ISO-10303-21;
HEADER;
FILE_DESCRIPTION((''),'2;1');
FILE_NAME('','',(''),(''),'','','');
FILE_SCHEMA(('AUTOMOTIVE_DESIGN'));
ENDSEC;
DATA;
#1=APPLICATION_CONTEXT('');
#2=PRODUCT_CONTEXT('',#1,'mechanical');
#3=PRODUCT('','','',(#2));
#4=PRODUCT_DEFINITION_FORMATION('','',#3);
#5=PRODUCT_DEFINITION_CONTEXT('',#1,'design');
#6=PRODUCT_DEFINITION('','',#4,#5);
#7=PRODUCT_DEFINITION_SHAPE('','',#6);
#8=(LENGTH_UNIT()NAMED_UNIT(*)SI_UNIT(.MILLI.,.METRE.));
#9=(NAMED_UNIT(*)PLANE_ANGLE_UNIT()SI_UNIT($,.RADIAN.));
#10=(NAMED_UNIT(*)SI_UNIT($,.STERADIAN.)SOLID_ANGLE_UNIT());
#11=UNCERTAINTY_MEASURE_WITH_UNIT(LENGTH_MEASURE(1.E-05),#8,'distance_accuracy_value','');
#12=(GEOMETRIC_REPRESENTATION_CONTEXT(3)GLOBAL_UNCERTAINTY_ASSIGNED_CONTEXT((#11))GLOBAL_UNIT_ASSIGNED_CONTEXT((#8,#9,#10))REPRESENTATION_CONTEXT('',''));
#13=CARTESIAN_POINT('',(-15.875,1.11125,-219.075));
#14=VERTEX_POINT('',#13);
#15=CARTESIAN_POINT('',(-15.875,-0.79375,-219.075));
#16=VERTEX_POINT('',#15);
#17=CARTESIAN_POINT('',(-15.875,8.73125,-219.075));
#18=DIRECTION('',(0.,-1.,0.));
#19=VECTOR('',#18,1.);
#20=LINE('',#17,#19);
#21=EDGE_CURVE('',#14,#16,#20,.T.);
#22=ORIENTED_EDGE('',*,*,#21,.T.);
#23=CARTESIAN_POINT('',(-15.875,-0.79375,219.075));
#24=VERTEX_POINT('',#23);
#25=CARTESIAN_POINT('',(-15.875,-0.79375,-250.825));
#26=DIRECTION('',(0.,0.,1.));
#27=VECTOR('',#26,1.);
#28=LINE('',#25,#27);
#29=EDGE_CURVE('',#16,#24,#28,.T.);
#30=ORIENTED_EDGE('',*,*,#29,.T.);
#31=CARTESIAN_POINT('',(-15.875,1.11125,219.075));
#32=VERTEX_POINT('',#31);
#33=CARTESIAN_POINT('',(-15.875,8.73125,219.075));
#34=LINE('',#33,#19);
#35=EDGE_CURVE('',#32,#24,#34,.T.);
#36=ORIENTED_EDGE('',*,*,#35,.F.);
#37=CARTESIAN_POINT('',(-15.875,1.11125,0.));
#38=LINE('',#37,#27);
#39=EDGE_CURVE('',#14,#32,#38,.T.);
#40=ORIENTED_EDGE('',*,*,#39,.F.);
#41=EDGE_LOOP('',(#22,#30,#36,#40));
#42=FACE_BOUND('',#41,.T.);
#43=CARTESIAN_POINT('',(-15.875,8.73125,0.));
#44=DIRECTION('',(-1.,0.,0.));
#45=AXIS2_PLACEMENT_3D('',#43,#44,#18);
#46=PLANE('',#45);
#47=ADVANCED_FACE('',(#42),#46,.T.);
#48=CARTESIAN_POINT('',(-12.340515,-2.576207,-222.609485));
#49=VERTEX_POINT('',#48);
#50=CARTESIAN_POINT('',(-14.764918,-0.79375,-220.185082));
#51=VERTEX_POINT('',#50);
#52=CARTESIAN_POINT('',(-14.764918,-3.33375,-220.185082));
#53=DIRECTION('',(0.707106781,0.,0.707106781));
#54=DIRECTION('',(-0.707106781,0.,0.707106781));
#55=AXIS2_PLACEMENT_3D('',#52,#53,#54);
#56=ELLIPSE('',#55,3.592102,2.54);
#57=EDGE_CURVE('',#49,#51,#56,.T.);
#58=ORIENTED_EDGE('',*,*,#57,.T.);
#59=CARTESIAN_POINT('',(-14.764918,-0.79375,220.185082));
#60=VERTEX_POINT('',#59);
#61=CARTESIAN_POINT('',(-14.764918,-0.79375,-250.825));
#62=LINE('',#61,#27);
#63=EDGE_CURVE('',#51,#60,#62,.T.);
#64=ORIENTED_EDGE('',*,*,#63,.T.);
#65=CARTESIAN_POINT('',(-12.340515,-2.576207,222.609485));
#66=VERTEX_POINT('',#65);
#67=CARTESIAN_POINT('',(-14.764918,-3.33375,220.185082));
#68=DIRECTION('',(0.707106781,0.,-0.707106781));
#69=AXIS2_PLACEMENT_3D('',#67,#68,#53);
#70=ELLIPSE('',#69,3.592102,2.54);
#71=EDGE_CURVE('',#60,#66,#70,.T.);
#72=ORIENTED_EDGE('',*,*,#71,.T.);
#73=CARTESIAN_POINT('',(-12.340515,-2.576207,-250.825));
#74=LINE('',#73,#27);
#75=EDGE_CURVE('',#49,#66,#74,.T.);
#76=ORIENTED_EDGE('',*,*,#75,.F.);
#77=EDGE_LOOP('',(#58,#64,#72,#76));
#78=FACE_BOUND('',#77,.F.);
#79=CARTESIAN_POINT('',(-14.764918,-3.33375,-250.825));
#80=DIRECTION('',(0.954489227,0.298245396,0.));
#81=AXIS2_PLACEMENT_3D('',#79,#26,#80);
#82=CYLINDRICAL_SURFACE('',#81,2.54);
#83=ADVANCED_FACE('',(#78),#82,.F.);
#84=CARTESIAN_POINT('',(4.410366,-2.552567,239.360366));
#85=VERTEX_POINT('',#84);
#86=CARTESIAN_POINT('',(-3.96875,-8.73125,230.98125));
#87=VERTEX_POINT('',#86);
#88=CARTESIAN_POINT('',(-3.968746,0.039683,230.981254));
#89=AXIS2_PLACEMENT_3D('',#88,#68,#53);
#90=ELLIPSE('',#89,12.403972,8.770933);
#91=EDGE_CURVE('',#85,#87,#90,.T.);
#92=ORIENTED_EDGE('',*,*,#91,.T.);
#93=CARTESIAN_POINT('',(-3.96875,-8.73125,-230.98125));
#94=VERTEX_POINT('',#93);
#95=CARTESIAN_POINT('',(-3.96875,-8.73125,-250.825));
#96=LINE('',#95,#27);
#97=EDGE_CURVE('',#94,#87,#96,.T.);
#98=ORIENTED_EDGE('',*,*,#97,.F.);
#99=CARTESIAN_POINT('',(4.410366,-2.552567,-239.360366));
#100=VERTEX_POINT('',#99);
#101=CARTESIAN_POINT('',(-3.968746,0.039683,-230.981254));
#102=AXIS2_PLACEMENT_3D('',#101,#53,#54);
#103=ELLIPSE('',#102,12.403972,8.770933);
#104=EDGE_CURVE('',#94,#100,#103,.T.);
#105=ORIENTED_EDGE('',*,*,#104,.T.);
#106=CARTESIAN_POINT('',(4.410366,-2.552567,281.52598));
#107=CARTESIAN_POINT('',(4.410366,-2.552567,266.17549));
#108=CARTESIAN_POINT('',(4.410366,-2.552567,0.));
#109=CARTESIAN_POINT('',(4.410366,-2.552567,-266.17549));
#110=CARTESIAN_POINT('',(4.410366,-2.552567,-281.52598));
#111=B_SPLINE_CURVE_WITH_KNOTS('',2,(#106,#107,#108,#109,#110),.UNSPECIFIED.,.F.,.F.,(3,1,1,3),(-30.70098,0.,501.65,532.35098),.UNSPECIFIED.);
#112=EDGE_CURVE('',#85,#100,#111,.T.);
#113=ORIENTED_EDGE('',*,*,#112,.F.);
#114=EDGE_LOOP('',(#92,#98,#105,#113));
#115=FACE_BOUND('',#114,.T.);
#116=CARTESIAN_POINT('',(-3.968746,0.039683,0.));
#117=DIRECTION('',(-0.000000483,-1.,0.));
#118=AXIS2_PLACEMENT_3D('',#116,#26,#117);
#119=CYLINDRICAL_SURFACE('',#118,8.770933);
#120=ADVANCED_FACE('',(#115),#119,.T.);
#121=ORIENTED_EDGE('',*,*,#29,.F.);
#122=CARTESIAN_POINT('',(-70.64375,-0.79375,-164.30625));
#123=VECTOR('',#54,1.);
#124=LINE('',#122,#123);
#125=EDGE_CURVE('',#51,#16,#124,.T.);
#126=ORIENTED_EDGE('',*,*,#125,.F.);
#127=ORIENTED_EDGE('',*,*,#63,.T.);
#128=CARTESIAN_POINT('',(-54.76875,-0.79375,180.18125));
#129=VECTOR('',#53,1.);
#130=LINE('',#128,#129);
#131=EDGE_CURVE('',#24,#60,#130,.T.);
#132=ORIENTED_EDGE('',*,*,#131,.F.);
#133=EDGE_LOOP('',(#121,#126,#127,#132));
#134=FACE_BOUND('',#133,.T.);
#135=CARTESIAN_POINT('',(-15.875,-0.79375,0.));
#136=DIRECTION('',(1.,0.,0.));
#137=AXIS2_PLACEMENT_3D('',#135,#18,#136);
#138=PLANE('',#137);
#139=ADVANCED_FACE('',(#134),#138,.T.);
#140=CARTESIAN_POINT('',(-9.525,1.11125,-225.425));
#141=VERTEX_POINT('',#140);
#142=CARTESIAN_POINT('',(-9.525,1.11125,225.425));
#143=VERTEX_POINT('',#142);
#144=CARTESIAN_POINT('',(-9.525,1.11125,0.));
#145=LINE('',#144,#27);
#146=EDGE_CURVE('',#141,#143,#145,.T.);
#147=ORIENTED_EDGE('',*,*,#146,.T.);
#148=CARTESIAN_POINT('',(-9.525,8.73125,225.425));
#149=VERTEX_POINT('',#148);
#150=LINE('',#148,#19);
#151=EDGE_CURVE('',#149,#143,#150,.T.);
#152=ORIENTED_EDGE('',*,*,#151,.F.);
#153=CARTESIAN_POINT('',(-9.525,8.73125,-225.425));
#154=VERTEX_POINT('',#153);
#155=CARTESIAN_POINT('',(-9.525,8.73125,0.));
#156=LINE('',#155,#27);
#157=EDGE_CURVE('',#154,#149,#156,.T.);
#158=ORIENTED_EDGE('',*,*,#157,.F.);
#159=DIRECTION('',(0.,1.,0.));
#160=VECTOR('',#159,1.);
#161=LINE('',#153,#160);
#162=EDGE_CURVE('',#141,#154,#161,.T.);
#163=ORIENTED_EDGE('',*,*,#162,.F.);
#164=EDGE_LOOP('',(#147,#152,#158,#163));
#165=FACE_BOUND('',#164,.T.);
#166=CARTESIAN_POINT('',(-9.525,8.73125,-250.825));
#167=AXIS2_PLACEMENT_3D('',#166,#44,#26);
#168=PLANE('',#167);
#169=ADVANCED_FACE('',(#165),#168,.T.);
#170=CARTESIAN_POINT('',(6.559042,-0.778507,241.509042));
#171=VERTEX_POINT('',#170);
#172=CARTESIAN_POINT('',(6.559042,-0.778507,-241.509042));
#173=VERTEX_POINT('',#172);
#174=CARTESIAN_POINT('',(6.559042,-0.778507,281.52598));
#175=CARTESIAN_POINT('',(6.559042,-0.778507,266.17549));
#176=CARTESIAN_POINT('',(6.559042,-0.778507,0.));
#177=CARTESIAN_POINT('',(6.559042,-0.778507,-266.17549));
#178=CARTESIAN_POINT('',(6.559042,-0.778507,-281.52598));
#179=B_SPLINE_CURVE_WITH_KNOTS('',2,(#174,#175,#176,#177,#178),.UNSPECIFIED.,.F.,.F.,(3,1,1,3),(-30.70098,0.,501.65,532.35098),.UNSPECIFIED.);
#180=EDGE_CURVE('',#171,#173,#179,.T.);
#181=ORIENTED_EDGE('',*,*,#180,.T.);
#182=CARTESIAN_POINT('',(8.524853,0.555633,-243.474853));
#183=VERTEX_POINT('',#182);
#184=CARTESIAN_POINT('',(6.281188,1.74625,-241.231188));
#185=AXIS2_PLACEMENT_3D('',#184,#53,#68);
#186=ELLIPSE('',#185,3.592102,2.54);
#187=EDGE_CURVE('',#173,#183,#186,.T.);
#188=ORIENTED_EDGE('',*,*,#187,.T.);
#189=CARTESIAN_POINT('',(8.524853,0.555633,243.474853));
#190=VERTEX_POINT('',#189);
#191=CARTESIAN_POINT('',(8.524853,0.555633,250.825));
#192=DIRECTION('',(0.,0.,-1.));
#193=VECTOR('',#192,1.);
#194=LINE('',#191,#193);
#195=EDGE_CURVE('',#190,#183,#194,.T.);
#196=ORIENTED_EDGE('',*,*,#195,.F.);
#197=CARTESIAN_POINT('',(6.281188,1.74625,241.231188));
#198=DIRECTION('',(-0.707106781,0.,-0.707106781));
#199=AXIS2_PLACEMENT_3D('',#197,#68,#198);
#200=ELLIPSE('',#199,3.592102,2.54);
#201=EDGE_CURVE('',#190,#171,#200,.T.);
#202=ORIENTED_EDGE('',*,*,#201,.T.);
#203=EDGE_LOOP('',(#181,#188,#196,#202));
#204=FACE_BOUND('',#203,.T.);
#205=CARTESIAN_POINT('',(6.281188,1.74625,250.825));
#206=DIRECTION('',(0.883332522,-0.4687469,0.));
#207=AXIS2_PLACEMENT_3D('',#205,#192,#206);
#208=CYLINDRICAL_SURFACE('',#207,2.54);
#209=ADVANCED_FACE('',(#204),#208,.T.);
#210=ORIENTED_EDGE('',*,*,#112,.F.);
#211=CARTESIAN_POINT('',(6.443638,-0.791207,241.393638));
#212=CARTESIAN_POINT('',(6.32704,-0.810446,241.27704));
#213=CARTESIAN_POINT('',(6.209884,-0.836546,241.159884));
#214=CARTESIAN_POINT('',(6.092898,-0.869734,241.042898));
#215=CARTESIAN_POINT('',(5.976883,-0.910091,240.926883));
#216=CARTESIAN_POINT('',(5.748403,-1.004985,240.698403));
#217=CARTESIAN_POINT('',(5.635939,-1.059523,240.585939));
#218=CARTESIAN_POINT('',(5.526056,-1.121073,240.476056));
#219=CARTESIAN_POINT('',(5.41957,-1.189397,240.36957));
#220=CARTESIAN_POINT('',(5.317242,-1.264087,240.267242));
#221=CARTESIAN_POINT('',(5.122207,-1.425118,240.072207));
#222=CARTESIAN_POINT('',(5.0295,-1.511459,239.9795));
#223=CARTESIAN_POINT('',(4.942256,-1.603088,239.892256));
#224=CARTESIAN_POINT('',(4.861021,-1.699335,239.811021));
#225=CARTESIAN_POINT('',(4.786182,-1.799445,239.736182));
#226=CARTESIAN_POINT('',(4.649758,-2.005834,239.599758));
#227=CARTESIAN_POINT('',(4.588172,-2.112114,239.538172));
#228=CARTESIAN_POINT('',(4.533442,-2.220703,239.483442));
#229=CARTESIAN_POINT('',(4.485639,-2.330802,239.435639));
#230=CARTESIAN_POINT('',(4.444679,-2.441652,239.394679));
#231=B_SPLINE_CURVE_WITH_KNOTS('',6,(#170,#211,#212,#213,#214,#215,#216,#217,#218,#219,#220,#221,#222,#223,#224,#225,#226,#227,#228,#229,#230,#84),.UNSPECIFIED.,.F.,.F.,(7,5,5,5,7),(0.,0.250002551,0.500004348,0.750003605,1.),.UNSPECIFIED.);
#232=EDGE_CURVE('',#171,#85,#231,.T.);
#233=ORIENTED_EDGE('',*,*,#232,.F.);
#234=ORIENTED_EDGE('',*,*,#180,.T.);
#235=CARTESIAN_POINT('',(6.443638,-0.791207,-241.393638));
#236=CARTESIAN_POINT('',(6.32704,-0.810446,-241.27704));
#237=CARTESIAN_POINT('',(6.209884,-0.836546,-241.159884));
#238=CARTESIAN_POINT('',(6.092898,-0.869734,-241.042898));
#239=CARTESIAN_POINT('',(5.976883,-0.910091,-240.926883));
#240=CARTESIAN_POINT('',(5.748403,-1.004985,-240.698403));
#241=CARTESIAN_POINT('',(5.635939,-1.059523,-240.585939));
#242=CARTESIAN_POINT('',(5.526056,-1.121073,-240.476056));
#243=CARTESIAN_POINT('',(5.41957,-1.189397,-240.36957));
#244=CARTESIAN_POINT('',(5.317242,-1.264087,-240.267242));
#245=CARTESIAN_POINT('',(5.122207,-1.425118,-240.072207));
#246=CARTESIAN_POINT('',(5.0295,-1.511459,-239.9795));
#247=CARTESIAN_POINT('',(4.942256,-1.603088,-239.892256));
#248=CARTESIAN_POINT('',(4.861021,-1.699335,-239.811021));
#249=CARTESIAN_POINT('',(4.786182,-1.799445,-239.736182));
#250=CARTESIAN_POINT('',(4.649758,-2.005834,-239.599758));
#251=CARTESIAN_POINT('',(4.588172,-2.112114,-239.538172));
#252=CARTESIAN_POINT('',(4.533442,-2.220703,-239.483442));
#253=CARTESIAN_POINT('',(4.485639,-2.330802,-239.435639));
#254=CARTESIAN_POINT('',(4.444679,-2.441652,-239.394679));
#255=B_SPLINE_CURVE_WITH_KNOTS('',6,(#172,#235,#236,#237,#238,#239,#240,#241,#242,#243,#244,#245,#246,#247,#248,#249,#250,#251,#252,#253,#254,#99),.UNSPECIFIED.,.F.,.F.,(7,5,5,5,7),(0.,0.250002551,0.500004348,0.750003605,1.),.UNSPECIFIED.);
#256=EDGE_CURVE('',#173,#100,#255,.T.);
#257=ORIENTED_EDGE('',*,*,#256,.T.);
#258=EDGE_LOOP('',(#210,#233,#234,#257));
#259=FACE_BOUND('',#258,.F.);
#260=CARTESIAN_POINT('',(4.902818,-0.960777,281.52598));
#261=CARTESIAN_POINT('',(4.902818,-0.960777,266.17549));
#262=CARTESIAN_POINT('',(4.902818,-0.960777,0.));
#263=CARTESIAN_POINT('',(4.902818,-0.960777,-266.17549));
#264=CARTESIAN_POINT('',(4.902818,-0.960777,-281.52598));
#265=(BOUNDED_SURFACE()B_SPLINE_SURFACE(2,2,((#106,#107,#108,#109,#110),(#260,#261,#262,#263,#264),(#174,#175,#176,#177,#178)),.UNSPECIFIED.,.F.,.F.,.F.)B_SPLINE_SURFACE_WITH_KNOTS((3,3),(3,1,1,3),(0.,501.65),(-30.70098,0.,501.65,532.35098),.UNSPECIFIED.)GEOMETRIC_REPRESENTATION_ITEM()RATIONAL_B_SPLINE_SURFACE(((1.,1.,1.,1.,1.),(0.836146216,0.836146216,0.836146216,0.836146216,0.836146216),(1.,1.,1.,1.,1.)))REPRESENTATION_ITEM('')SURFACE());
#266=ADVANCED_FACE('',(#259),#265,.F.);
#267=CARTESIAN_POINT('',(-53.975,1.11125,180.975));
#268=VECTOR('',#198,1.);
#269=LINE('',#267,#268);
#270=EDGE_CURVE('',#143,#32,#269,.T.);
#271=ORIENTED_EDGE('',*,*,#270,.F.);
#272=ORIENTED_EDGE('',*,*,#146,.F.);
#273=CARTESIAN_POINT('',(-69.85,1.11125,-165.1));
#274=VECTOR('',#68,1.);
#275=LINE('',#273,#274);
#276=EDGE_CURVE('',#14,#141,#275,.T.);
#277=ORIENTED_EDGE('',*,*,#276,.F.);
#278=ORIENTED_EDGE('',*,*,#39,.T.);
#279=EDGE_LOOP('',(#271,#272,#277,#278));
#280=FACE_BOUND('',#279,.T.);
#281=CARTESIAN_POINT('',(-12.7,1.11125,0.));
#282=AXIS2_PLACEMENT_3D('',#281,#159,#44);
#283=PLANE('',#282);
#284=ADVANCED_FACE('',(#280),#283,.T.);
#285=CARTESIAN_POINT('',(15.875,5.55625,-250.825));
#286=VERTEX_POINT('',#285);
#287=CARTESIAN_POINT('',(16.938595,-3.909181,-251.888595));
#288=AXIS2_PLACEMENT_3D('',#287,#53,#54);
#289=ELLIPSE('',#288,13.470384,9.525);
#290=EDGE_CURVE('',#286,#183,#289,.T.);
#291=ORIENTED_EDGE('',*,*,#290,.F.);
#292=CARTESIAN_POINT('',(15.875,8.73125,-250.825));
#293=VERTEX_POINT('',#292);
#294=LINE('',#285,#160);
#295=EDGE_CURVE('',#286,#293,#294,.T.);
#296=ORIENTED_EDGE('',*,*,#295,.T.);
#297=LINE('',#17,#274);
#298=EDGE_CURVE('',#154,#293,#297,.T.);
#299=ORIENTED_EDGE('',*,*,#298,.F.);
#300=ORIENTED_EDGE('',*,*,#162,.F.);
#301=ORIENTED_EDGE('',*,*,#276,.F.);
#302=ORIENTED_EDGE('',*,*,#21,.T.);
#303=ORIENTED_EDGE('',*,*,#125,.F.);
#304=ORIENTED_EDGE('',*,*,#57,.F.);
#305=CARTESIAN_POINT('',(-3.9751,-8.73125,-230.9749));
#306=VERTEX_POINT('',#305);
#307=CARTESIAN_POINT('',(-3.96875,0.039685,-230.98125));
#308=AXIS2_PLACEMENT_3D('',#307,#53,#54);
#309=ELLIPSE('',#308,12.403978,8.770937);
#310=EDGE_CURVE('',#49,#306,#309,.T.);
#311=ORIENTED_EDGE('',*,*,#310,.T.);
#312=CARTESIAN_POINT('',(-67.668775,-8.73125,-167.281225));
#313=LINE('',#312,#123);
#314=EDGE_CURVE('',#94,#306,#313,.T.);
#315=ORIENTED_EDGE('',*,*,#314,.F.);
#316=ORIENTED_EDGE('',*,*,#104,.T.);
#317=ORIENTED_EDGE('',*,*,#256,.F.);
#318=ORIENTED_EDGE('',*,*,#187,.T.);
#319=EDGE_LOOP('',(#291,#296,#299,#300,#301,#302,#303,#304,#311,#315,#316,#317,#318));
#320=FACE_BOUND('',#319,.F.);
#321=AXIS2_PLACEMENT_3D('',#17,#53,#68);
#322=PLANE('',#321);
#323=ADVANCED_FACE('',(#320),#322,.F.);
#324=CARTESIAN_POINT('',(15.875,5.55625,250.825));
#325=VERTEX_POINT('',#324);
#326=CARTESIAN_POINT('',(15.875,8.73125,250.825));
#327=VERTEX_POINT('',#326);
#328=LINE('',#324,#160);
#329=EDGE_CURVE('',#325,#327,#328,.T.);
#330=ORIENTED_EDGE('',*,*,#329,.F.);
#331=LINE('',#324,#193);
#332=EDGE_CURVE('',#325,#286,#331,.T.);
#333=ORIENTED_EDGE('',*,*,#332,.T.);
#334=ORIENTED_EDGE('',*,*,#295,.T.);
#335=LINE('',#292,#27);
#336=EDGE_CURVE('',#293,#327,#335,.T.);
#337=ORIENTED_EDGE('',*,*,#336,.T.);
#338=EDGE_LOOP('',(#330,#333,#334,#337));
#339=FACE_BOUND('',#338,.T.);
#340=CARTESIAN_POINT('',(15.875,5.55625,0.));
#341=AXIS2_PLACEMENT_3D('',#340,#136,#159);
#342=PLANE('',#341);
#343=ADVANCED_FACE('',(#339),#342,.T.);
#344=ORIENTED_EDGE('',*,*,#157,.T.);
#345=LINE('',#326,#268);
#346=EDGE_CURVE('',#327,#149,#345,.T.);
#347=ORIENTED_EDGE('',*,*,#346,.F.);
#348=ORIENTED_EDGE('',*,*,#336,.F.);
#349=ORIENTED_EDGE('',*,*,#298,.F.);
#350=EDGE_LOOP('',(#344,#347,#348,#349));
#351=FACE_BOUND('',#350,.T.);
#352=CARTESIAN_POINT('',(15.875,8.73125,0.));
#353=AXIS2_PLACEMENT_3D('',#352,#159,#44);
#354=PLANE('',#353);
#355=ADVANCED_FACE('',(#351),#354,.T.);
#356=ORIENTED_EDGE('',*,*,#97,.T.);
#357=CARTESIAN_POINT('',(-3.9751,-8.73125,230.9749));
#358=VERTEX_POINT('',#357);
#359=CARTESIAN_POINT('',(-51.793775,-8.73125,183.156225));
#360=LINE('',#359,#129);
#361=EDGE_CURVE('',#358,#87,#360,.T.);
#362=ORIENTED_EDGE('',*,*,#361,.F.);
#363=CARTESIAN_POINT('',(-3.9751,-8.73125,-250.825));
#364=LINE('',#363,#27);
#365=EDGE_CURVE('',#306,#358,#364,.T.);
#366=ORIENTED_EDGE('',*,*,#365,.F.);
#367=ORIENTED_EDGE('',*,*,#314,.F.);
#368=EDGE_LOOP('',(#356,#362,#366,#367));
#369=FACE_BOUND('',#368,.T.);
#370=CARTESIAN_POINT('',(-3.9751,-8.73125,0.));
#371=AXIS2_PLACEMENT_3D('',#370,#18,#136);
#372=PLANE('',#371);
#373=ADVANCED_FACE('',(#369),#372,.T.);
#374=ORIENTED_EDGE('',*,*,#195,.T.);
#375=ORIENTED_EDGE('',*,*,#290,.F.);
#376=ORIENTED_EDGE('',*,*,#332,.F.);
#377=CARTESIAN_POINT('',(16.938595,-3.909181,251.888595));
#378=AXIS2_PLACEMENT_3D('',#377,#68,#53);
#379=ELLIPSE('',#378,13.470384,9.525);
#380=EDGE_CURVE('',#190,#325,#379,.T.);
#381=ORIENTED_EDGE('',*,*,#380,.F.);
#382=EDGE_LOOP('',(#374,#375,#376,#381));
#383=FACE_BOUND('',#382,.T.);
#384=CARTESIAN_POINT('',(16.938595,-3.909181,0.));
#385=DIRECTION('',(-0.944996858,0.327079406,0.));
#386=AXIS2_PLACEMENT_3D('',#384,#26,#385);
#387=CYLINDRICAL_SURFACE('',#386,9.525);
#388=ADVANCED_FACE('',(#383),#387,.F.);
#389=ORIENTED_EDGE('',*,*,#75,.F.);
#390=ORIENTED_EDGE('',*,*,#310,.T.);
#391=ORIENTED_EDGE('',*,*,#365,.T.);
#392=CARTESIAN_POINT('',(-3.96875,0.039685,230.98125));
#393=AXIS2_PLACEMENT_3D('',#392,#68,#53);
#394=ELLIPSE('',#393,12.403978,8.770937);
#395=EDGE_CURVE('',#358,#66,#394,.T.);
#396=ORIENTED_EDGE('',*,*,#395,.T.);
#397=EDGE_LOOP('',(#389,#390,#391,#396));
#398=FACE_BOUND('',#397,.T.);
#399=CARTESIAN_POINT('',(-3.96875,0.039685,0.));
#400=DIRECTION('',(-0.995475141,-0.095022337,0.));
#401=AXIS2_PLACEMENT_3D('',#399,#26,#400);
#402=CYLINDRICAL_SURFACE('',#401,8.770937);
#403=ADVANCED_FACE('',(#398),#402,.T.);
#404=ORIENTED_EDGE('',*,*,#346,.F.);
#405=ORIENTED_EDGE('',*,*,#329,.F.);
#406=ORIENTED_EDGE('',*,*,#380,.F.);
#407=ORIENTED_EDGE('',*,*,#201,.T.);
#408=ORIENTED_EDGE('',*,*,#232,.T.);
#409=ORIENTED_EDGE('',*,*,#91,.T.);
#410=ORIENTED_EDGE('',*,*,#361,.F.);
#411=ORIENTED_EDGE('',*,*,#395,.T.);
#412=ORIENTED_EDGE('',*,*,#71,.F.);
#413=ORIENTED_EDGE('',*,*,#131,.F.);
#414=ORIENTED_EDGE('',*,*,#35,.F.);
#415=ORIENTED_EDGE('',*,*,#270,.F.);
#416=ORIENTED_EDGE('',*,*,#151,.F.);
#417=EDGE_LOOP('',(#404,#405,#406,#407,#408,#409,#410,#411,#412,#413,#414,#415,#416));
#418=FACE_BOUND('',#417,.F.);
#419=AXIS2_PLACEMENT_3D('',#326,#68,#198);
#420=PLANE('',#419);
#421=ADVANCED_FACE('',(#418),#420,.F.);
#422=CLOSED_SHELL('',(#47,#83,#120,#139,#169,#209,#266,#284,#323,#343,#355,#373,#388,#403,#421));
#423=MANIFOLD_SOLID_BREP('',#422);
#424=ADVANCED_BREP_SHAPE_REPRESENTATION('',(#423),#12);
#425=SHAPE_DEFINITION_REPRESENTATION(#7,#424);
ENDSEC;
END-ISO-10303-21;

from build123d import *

# Parameters (mm, degrees)
F1_DEPTH = 250.825
F2_R     = 2.54
F3_R     = 2.54
F4_R     = 2.54
F6_W     = 6.35
F6_H     = 501.65
F7_DEPTH = 7.62
F8_DEPTH = 17.4635001


# Not quite as in the source:
# - ends of sketch curves that miss each other by under 0.0002 mm in the source are joined


with BuildPart() as f1:
    # F0 (on Top) → F1 (new body, symmetric)
    with BuildSketch(Plane.XY):
        with BuildLine():
            Line((15.875, 5.55625), (15.875, 8.73125))
            Line((15.875, 8.73125), (-15.875, 8.73125))
            Line((-15.875, 8.73125), (-15.875, -0.79375))
            Line((-15.875, -0.79375), (-12.7, -0.79375))
            ThreePointArc((-12.7, -0.79375), (-9.8710707302, -6.4481459867), (-3.9751, -8.73125))
            Line((-3.9751, -8.73125), (-3.96875, -8.73125))
            ThreePointArc((-3.96875, -8.73125), (1.9312218072, -6.4502821485), (4.7625, -0.79375))
            Line((4.7625, -0.79375), (7.9375, -0.79375))
            ThreePointArc((7.9375, -0.79375), (10.9883747468, 3.5285940665), (15.875, 5.55625))
        make_face()
    extrude(amount=F1_DEPTH, both=True)

    # F2
    f2_edges = [f1.edges().sort_by_distance(p)[0] for p in [
        (7.9375, -0.79375, 0),
    ]]
    fillet(f2_edges, radius=F2_R)

    # F3
    f3_edges = [f1.edges().sort_by_distance(p)[0] for p in [
        (-12.7, -0.79375, 0),
    ]]
    fillet(f3_edges, radius=F3_R)

    # F4
    f4_edges = [f1.edges().sort_by_distance(p)[0] for p in [
        (4.7625, -0.79375, 0),
    ]]
    fillet(f4_edges, radius=F4_R)

    # F6 (on face) → F7 (cut)
    with BuildSketch(Plane(origin=(0, 8.73125, 0), x_dir=(-1, 0, 0), z_dir=(0, 1, 0))):
        with Locations((12.7, 0)):
            Rectangle(F6_W, F6_H)
    extrude(amount=-F7_DEPTH, mode=Mode.SUBTRACT)

    # F5 (on face) → F8 (cut, through all)
    with BuildSketch(Plane(origin=(0, 8.73125, 0), x_dir=(-1, 0, 0), z_dir=(0, 1, 0))):
        Polygon((15.875, -250.825), (15.875, -219.075), (-15.875, -250.825), align=None)
        Polygon((-15.875, 250.825), (15.875, 219.075), (15.875, 250.825), align=None)
    extrude(amount=-F8_DEPTH, mode=Mode.SUBTRACT)


solid = f1.part
